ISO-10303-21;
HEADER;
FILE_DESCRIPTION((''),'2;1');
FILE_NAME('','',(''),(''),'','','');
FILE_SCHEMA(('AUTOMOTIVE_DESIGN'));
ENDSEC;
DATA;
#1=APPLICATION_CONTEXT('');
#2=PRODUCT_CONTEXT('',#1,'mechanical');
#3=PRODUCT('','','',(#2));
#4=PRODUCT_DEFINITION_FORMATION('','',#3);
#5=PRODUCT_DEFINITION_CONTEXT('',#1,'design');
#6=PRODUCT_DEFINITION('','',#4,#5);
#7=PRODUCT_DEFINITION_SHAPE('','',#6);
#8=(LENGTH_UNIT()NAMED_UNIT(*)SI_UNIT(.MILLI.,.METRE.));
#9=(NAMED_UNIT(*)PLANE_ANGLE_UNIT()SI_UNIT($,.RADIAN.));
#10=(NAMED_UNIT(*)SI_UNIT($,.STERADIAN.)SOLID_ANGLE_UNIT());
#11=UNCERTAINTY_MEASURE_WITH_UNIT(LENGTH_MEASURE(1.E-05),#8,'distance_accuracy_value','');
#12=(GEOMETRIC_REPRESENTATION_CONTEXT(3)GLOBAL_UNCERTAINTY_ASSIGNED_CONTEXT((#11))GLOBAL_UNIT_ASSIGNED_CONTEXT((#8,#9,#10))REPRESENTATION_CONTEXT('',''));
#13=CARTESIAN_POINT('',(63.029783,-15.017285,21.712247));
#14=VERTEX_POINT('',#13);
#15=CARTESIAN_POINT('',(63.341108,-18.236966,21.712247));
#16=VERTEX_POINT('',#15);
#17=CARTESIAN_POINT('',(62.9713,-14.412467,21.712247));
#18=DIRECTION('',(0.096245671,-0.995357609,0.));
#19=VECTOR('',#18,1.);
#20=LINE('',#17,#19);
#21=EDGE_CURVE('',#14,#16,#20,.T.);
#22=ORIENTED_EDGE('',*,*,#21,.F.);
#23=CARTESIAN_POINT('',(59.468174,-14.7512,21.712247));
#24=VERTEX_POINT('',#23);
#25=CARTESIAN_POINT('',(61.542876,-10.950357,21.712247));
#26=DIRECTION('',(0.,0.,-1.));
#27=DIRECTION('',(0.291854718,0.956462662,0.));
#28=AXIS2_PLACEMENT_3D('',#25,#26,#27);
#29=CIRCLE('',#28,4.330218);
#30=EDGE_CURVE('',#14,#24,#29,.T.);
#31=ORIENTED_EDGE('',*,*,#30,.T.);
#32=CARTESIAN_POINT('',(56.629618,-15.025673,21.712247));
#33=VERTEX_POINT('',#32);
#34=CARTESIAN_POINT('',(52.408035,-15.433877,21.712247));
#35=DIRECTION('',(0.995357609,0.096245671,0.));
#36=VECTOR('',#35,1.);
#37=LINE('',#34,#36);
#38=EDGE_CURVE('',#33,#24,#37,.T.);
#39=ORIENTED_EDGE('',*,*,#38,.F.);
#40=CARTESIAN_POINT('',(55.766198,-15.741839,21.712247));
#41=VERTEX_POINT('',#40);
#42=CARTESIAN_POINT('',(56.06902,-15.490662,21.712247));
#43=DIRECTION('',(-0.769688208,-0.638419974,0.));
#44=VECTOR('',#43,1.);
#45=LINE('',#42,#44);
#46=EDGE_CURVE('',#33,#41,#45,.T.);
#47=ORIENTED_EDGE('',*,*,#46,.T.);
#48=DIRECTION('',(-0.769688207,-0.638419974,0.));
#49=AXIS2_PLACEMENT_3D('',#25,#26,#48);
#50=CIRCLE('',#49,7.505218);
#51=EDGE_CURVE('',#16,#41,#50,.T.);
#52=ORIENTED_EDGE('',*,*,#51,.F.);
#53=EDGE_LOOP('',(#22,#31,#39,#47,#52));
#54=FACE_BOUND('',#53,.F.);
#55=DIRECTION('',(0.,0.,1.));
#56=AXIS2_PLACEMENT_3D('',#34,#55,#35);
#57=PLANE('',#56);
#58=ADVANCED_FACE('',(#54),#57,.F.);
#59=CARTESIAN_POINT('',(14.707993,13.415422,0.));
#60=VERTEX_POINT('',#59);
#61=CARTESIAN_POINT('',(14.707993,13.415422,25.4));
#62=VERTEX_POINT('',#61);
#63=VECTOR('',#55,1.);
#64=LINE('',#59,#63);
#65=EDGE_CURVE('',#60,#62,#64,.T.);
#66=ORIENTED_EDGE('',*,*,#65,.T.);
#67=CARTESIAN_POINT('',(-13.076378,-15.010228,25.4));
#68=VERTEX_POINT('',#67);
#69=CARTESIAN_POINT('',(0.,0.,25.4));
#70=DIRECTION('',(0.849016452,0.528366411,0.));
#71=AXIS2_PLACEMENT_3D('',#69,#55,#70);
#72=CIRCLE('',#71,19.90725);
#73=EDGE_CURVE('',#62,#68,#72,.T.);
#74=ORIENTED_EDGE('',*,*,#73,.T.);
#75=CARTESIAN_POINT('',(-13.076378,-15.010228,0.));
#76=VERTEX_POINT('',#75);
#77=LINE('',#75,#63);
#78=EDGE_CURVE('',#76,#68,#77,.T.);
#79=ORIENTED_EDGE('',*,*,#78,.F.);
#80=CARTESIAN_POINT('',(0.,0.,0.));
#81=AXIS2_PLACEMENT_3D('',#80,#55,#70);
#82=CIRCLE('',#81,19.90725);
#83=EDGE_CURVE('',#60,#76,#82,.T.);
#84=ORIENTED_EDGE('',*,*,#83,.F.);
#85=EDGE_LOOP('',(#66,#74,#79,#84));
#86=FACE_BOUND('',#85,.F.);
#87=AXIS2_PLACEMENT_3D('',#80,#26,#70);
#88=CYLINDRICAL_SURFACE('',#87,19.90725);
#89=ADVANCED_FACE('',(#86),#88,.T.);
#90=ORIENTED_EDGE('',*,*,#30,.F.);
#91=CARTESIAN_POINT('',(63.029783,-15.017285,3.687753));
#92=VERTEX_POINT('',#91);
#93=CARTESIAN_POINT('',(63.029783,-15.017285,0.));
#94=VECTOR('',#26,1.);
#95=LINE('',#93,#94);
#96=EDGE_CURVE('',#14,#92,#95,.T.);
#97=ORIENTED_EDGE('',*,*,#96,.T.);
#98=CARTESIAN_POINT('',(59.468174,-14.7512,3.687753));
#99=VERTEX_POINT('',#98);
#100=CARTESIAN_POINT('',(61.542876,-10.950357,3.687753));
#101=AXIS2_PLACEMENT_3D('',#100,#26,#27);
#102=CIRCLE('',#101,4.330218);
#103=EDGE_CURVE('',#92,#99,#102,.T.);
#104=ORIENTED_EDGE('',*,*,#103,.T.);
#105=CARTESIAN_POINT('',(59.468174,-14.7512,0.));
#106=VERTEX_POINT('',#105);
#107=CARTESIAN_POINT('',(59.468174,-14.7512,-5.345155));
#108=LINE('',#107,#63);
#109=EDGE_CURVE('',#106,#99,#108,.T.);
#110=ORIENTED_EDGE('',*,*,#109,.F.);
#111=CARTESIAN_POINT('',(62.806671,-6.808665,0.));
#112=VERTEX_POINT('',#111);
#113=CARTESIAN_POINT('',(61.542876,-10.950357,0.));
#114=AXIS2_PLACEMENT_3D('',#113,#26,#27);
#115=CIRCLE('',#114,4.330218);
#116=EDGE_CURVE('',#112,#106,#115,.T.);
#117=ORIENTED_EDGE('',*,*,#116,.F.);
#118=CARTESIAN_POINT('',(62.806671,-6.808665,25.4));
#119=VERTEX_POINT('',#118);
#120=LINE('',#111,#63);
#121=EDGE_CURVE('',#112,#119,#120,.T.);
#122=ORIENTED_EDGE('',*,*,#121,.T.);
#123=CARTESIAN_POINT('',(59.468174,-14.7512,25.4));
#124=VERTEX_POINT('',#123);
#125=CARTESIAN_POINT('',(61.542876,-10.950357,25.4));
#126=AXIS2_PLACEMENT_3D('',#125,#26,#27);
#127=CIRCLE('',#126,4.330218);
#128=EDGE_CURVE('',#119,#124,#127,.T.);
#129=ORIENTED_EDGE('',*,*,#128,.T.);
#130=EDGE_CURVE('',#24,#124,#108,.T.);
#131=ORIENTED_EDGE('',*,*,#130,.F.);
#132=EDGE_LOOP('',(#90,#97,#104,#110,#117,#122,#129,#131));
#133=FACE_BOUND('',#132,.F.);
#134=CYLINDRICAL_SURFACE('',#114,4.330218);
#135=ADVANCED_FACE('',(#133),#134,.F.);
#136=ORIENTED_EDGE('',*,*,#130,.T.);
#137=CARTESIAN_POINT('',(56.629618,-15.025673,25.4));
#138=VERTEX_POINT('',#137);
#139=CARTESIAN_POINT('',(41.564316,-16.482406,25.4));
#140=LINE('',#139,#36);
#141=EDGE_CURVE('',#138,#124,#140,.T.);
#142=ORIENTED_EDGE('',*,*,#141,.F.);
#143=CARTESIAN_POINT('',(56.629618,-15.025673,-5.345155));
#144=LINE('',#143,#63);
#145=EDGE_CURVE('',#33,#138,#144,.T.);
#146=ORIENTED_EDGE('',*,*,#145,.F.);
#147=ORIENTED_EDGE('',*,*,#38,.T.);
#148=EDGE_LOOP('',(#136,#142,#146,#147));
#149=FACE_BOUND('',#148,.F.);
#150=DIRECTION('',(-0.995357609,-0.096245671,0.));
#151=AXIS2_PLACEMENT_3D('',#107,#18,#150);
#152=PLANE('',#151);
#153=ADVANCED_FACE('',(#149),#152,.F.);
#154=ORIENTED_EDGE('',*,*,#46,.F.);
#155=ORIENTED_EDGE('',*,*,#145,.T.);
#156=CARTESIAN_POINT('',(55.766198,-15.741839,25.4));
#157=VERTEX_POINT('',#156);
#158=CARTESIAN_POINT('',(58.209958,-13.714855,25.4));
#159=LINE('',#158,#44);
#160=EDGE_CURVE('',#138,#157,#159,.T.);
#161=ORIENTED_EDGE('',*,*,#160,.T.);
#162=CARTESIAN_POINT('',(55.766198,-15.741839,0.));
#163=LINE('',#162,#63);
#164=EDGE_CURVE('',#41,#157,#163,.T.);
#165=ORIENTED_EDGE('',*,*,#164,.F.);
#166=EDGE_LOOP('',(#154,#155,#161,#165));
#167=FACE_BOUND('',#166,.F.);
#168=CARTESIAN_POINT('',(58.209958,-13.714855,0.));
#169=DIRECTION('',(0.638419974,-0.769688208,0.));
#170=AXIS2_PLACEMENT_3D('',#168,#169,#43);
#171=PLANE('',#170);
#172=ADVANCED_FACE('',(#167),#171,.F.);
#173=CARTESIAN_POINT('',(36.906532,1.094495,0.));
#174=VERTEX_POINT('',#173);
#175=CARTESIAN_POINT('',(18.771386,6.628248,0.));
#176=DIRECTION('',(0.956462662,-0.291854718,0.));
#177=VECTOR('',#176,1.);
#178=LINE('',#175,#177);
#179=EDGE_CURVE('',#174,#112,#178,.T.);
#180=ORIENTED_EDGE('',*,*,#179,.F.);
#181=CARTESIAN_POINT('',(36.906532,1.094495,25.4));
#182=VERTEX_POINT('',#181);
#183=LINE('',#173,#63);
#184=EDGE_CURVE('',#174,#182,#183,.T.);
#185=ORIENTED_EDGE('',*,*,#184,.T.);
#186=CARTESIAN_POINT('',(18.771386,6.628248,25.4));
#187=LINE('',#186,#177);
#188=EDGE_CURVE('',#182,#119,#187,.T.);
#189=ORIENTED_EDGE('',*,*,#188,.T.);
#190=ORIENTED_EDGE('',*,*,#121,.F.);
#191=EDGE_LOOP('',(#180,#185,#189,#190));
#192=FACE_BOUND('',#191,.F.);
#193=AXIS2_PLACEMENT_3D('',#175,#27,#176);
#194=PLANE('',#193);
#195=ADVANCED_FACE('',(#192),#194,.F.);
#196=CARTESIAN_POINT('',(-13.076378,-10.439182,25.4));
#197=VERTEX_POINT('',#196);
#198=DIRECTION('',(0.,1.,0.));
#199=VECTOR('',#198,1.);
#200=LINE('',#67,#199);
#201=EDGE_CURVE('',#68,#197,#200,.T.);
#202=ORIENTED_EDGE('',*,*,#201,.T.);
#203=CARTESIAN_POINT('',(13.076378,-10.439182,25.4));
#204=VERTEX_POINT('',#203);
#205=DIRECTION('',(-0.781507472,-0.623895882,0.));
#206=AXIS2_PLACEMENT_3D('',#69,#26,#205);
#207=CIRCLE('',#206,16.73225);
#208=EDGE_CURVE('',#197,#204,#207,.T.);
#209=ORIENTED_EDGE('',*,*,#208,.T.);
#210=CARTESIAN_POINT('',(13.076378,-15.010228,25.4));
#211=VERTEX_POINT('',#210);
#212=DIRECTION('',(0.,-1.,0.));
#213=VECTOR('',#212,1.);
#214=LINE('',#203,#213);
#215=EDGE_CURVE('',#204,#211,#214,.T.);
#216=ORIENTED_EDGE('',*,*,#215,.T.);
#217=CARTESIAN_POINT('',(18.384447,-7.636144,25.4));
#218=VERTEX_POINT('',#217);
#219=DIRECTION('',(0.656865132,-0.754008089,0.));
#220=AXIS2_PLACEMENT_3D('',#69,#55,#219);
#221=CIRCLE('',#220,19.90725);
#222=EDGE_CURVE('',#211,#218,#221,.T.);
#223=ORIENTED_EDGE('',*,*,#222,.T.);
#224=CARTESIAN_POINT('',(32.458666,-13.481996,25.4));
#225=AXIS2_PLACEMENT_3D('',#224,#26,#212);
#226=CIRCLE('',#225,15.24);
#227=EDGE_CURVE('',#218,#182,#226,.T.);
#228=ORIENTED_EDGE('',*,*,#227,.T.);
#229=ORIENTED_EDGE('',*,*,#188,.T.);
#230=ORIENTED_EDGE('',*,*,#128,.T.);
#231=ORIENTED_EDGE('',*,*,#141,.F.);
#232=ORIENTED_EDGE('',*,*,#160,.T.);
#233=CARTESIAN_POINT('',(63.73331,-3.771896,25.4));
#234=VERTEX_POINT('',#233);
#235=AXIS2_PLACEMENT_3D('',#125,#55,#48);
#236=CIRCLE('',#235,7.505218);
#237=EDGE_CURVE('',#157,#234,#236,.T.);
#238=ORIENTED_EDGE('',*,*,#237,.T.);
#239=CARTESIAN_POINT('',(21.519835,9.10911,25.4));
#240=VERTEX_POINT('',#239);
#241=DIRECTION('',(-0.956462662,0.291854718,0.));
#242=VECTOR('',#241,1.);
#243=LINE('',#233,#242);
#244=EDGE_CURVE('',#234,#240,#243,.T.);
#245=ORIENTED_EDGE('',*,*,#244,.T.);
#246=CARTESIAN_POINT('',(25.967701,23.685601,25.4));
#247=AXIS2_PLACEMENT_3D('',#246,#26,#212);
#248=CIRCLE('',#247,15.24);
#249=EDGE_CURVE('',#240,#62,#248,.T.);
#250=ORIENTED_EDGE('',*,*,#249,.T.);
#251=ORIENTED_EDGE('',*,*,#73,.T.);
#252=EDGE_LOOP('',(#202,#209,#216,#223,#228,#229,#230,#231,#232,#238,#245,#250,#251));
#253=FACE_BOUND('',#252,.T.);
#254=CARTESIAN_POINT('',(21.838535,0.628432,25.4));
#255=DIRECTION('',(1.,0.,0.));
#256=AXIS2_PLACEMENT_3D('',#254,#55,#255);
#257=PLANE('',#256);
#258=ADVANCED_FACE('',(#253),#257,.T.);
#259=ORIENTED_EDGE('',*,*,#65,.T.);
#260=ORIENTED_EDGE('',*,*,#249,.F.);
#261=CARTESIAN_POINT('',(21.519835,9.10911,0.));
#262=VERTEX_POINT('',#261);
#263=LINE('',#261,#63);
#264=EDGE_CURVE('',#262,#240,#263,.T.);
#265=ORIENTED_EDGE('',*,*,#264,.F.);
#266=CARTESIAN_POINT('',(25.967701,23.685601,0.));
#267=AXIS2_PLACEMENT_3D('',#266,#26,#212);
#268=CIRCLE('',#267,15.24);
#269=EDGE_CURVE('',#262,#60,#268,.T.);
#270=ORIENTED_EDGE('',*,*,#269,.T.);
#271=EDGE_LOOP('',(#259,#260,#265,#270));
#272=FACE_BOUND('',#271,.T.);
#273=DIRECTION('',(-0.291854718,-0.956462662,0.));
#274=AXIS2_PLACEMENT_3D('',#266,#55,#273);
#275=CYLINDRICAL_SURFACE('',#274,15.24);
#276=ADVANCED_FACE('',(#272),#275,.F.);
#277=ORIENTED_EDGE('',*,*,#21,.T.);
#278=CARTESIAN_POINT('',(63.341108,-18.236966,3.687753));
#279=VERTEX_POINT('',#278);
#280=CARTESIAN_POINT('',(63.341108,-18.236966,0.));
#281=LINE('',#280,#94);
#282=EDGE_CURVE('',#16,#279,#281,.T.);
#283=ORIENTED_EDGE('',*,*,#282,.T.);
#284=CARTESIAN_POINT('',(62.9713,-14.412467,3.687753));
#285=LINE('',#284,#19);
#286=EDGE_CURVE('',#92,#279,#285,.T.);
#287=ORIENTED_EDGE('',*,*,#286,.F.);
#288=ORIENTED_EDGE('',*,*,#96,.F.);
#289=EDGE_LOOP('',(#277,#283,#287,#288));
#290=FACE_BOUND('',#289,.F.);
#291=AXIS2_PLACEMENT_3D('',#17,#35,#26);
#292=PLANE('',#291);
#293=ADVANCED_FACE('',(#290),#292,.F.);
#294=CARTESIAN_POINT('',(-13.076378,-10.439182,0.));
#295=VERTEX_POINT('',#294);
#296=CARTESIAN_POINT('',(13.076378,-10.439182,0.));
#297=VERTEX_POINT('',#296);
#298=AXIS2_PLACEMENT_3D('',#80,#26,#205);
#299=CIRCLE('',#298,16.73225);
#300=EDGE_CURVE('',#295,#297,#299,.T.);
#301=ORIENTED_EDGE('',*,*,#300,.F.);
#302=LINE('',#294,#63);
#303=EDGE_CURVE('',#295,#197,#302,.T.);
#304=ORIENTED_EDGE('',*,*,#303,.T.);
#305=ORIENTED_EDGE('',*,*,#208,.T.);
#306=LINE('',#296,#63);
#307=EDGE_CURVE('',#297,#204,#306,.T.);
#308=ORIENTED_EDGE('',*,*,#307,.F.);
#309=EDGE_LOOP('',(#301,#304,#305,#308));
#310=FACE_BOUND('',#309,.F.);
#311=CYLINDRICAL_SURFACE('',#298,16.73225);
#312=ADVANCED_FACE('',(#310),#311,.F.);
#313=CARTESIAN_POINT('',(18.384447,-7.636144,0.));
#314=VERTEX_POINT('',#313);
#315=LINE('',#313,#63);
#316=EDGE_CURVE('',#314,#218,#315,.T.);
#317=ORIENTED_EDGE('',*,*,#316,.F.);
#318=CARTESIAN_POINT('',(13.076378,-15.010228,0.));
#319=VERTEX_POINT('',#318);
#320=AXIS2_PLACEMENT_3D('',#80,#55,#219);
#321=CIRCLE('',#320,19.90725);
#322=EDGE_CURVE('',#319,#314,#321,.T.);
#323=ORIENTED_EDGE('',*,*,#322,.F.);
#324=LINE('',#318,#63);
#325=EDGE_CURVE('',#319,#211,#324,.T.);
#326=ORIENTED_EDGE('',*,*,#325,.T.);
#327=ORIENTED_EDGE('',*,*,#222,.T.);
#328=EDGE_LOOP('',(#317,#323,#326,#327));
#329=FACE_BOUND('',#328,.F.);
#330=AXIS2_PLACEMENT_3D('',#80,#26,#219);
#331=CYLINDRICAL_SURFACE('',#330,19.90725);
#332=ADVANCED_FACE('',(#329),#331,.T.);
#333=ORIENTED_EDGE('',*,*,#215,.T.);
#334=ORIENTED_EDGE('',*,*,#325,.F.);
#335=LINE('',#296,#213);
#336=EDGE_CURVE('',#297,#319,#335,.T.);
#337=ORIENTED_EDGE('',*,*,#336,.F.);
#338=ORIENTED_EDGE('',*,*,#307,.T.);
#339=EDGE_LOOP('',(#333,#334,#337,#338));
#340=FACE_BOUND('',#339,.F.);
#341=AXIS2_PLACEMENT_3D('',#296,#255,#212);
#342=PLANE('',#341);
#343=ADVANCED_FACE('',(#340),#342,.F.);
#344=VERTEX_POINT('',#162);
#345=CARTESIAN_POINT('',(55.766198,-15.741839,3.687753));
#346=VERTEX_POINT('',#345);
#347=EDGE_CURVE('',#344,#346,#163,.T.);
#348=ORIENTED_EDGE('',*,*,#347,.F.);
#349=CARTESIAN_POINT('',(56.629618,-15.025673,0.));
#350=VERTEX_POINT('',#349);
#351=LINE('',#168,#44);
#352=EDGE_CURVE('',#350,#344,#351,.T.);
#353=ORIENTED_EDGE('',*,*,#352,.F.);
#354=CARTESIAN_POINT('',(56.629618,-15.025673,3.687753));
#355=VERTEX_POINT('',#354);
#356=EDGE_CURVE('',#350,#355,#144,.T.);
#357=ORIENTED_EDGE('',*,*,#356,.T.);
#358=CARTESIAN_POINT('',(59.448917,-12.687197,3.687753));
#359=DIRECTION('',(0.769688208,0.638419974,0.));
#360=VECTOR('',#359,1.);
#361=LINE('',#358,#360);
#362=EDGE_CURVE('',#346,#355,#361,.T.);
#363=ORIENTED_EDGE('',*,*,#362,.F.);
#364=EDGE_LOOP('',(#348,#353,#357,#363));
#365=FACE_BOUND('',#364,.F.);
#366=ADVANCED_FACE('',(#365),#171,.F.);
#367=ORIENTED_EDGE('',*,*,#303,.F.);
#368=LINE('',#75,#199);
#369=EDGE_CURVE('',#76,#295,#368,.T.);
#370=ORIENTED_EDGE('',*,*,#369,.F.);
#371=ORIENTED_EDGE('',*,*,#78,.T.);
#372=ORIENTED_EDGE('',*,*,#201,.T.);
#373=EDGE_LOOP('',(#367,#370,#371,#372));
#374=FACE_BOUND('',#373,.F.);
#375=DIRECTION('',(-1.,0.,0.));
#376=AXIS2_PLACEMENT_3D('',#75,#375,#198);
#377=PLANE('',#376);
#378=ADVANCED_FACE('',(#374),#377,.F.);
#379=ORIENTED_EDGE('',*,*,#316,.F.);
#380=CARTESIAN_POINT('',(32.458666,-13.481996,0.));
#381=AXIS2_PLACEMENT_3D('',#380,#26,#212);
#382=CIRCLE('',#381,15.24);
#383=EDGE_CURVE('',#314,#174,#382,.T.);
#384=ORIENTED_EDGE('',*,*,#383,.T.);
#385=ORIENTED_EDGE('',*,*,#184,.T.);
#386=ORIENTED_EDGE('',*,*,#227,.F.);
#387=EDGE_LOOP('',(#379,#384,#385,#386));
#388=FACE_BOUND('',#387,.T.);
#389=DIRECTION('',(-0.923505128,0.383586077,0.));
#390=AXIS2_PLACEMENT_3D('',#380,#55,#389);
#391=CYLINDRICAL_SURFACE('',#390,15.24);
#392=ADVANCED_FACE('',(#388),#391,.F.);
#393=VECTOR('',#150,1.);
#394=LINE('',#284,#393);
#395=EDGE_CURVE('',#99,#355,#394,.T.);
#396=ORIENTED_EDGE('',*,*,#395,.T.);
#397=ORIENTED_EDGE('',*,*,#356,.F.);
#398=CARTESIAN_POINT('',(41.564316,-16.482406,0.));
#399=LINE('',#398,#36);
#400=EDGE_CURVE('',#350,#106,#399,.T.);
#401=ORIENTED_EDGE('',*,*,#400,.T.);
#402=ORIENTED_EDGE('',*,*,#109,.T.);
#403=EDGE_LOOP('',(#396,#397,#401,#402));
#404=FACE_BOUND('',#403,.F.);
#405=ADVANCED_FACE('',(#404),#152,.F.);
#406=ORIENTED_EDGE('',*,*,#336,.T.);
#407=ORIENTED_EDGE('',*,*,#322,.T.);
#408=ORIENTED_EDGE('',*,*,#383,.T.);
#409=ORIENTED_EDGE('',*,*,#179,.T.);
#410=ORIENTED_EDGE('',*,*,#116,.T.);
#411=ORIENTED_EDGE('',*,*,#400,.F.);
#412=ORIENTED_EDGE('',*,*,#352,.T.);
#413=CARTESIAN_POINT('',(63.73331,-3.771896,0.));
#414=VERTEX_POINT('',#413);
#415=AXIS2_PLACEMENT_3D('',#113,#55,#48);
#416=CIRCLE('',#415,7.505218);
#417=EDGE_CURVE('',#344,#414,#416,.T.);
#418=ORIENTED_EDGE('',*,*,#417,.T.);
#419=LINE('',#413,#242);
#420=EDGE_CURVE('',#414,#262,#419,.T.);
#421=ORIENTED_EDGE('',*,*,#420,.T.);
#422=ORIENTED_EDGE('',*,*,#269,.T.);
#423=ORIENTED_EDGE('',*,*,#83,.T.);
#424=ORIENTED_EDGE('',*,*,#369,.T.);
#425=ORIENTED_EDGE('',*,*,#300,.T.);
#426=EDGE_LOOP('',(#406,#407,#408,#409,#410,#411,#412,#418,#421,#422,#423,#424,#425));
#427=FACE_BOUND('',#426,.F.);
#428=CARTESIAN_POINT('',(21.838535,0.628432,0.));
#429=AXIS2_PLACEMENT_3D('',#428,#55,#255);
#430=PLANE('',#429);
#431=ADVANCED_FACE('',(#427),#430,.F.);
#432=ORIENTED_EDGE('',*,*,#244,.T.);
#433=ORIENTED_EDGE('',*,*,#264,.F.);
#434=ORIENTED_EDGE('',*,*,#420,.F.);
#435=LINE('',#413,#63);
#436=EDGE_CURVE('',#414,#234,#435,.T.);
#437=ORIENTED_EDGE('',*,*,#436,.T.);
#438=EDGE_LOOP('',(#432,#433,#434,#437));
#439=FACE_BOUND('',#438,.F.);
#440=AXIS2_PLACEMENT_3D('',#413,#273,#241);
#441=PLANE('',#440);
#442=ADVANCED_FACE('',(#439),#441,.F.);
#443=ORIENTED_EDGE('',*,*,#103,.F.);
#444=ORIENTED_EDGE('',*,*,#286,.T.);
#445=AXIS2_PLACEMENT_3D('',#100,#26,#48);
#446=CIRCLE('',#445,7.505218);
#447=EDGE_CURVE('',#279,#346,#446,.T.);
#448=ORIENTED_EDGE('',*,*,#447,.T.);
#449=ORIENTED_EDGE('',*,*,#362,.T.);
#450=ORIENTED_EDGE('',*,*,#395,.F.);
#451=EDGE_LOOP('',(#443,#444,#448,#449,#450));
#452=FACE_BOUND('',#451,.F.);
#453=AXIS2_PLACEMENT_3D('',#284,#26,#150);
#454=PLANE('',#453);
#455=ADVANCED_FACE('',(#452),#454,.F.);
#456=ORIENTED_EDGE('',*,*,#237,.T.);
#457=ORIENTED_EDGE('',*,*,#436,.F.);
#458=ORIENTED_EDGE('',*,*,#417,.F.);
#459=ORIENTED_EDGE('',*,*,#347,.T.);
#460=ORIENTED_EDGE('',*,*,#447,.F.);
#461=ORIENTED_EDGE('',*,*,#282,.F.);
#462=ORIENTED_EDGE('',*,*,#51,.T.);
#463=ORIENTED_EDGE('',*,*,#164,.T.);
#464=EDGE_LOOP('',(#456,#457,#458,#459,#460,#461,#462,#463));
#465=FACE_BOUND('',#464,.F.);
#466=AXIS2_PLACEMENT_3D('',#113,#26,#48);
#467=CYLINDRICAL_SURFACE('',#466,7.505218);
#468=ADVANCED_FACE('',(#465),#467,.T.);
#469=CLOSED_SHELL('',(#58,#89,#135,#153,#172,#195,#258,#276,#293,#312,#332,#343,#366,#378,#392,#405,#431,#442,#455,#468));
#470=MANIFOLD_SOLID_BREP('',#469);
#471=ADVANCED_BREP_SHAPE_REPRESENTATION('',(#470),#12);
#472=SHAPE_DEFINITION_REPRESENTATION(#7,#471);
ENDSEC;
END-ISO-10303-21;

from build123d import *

# Parameters (mm, degrees)
F1_DEPTH    = 25.4
F2_R        = 15.24
F3_T1_DEPTH = 36.0903109365
F4_W        = 3.5194646057
F4_H        = 9.0122472823
F4_W_2      = 2.8517952656
F4_W_3      = 4.2412726252
F5_DEPTH    = 25.4


# Not quite as in the source:
# - a fillet or chamfer that OpenCascade refuses, or shapes differently, is made with other operations: its cross-section is extruded or revolved along the edge and cut away or added


with BuildPart() as f1:
    # F0 (on Top) → F1 (new body)
    with BuildSketch(Plane.XY):
        with BuildLine():
            ThreePointArc((-13.0763784004, -10.4391818642), (0, 16.73225), (13.0763784004, -10.4391818642))
            Line((13.0763784004, -10.4391818642), (13.0763784004, -15.0102275297))
            ThreePointArc((13.0763784004, -15.0102275297), (19.2516474294, -5.0668208785), (18.7713860197, 6.6282478426))
            Line((18.7713860197, 6.6282478426), (62.8066707781, -6.8086651928))
            ThreePointArc((62.8066707781, -6.8086651928), (65.147620689, -13.3496506564), (58.2099580532, -13.7148553544))
            Line((58.2099580532, -13.7148553544), (55.7661979944, -15.7418387719))
            ThreePointArc((55.7661979944, -15.7418387719), (67.7906892269, -15.1088589169), (63.7333095074, -3.7718962412))
            Line((63.7333095074, -3.7718962412), (16.9015827692, 10.5183222263))
            ThreePointArc((16.9015827692, 10.5183222263), (-12.9067718767, 15.1563136113), (-13.0763784004, -15.0102275297))
            Line((-13.0763784004, -15.0102275297), (-13.0763784004, -10.4391818642))
        make_face()
    extrude(amount=F1_DEPTH)

    # F2
    f2_edges = [f1.edges().sort_by_distance(p)[0] for p in [
        (16.901583, 10.518322, 12.7),
        (18.771386, 6.628248, 12.7),
    ]]
    fillet(f2_edges, radius=F2_R)

    # F3: chamfer of 2.54 on 1 edges, made by hand

    # F3_s2 → F3_t1 (cut)
    with BuildSketch(Plane.XY.offset(-5.3451554683)):
        with BuildLine():
            Line((59.4681740413, -14.7511998168), (56.6296179231, -15.0256727671))
            Line((56.6296179231, -15.0256727671), (58.2099580532, -13.7148553544))
            ThreePointArc((58.2099580532, -13.7148553544), (58.8184317915, -14.3160957873), (59.4681740413, -14.7511998168))
        make_face()
    extrude(amount=F3_T1_DEPTH, mode=Mode.SUBTRACT)

    # F4 (on face) → F5 (cut)
    with BuildSketch(Plane(origin=(1.9640154801, -20.3115394411, 0), x_dir=(-0.9953576095, -0.0962456715, 0), z_dir=(-0.0962456715, 0.9953576095, 0))):
        with Locations((-59.5320927234, 8.1938763589)):
            Rectangle(F4_W, F4_H)
        with Locations((-59.5320927234, 17.2061236411)):
            Rectangle(F4_W, F4_H)
        with Locations((-56.3464627878, 17.2061236411)):
            Rectangle(F4_W_2, F4_H)
        with Locations((-56.3464627878, 8.1938763589)):
            Rectangle(F4_W_2, F4_H)
        with Locations((-52.7999288424, 8.1938763589)):
            Rectangle(F4_W_3, F4_H)
        with Locations((-52.7999288424, 17.2061236411)):
            Rectangle(F4_W_3, F4_H)
    extrude(amount=-F5_DEPTH, mode=Mode.SUBTRACT)


solid = f1.part
